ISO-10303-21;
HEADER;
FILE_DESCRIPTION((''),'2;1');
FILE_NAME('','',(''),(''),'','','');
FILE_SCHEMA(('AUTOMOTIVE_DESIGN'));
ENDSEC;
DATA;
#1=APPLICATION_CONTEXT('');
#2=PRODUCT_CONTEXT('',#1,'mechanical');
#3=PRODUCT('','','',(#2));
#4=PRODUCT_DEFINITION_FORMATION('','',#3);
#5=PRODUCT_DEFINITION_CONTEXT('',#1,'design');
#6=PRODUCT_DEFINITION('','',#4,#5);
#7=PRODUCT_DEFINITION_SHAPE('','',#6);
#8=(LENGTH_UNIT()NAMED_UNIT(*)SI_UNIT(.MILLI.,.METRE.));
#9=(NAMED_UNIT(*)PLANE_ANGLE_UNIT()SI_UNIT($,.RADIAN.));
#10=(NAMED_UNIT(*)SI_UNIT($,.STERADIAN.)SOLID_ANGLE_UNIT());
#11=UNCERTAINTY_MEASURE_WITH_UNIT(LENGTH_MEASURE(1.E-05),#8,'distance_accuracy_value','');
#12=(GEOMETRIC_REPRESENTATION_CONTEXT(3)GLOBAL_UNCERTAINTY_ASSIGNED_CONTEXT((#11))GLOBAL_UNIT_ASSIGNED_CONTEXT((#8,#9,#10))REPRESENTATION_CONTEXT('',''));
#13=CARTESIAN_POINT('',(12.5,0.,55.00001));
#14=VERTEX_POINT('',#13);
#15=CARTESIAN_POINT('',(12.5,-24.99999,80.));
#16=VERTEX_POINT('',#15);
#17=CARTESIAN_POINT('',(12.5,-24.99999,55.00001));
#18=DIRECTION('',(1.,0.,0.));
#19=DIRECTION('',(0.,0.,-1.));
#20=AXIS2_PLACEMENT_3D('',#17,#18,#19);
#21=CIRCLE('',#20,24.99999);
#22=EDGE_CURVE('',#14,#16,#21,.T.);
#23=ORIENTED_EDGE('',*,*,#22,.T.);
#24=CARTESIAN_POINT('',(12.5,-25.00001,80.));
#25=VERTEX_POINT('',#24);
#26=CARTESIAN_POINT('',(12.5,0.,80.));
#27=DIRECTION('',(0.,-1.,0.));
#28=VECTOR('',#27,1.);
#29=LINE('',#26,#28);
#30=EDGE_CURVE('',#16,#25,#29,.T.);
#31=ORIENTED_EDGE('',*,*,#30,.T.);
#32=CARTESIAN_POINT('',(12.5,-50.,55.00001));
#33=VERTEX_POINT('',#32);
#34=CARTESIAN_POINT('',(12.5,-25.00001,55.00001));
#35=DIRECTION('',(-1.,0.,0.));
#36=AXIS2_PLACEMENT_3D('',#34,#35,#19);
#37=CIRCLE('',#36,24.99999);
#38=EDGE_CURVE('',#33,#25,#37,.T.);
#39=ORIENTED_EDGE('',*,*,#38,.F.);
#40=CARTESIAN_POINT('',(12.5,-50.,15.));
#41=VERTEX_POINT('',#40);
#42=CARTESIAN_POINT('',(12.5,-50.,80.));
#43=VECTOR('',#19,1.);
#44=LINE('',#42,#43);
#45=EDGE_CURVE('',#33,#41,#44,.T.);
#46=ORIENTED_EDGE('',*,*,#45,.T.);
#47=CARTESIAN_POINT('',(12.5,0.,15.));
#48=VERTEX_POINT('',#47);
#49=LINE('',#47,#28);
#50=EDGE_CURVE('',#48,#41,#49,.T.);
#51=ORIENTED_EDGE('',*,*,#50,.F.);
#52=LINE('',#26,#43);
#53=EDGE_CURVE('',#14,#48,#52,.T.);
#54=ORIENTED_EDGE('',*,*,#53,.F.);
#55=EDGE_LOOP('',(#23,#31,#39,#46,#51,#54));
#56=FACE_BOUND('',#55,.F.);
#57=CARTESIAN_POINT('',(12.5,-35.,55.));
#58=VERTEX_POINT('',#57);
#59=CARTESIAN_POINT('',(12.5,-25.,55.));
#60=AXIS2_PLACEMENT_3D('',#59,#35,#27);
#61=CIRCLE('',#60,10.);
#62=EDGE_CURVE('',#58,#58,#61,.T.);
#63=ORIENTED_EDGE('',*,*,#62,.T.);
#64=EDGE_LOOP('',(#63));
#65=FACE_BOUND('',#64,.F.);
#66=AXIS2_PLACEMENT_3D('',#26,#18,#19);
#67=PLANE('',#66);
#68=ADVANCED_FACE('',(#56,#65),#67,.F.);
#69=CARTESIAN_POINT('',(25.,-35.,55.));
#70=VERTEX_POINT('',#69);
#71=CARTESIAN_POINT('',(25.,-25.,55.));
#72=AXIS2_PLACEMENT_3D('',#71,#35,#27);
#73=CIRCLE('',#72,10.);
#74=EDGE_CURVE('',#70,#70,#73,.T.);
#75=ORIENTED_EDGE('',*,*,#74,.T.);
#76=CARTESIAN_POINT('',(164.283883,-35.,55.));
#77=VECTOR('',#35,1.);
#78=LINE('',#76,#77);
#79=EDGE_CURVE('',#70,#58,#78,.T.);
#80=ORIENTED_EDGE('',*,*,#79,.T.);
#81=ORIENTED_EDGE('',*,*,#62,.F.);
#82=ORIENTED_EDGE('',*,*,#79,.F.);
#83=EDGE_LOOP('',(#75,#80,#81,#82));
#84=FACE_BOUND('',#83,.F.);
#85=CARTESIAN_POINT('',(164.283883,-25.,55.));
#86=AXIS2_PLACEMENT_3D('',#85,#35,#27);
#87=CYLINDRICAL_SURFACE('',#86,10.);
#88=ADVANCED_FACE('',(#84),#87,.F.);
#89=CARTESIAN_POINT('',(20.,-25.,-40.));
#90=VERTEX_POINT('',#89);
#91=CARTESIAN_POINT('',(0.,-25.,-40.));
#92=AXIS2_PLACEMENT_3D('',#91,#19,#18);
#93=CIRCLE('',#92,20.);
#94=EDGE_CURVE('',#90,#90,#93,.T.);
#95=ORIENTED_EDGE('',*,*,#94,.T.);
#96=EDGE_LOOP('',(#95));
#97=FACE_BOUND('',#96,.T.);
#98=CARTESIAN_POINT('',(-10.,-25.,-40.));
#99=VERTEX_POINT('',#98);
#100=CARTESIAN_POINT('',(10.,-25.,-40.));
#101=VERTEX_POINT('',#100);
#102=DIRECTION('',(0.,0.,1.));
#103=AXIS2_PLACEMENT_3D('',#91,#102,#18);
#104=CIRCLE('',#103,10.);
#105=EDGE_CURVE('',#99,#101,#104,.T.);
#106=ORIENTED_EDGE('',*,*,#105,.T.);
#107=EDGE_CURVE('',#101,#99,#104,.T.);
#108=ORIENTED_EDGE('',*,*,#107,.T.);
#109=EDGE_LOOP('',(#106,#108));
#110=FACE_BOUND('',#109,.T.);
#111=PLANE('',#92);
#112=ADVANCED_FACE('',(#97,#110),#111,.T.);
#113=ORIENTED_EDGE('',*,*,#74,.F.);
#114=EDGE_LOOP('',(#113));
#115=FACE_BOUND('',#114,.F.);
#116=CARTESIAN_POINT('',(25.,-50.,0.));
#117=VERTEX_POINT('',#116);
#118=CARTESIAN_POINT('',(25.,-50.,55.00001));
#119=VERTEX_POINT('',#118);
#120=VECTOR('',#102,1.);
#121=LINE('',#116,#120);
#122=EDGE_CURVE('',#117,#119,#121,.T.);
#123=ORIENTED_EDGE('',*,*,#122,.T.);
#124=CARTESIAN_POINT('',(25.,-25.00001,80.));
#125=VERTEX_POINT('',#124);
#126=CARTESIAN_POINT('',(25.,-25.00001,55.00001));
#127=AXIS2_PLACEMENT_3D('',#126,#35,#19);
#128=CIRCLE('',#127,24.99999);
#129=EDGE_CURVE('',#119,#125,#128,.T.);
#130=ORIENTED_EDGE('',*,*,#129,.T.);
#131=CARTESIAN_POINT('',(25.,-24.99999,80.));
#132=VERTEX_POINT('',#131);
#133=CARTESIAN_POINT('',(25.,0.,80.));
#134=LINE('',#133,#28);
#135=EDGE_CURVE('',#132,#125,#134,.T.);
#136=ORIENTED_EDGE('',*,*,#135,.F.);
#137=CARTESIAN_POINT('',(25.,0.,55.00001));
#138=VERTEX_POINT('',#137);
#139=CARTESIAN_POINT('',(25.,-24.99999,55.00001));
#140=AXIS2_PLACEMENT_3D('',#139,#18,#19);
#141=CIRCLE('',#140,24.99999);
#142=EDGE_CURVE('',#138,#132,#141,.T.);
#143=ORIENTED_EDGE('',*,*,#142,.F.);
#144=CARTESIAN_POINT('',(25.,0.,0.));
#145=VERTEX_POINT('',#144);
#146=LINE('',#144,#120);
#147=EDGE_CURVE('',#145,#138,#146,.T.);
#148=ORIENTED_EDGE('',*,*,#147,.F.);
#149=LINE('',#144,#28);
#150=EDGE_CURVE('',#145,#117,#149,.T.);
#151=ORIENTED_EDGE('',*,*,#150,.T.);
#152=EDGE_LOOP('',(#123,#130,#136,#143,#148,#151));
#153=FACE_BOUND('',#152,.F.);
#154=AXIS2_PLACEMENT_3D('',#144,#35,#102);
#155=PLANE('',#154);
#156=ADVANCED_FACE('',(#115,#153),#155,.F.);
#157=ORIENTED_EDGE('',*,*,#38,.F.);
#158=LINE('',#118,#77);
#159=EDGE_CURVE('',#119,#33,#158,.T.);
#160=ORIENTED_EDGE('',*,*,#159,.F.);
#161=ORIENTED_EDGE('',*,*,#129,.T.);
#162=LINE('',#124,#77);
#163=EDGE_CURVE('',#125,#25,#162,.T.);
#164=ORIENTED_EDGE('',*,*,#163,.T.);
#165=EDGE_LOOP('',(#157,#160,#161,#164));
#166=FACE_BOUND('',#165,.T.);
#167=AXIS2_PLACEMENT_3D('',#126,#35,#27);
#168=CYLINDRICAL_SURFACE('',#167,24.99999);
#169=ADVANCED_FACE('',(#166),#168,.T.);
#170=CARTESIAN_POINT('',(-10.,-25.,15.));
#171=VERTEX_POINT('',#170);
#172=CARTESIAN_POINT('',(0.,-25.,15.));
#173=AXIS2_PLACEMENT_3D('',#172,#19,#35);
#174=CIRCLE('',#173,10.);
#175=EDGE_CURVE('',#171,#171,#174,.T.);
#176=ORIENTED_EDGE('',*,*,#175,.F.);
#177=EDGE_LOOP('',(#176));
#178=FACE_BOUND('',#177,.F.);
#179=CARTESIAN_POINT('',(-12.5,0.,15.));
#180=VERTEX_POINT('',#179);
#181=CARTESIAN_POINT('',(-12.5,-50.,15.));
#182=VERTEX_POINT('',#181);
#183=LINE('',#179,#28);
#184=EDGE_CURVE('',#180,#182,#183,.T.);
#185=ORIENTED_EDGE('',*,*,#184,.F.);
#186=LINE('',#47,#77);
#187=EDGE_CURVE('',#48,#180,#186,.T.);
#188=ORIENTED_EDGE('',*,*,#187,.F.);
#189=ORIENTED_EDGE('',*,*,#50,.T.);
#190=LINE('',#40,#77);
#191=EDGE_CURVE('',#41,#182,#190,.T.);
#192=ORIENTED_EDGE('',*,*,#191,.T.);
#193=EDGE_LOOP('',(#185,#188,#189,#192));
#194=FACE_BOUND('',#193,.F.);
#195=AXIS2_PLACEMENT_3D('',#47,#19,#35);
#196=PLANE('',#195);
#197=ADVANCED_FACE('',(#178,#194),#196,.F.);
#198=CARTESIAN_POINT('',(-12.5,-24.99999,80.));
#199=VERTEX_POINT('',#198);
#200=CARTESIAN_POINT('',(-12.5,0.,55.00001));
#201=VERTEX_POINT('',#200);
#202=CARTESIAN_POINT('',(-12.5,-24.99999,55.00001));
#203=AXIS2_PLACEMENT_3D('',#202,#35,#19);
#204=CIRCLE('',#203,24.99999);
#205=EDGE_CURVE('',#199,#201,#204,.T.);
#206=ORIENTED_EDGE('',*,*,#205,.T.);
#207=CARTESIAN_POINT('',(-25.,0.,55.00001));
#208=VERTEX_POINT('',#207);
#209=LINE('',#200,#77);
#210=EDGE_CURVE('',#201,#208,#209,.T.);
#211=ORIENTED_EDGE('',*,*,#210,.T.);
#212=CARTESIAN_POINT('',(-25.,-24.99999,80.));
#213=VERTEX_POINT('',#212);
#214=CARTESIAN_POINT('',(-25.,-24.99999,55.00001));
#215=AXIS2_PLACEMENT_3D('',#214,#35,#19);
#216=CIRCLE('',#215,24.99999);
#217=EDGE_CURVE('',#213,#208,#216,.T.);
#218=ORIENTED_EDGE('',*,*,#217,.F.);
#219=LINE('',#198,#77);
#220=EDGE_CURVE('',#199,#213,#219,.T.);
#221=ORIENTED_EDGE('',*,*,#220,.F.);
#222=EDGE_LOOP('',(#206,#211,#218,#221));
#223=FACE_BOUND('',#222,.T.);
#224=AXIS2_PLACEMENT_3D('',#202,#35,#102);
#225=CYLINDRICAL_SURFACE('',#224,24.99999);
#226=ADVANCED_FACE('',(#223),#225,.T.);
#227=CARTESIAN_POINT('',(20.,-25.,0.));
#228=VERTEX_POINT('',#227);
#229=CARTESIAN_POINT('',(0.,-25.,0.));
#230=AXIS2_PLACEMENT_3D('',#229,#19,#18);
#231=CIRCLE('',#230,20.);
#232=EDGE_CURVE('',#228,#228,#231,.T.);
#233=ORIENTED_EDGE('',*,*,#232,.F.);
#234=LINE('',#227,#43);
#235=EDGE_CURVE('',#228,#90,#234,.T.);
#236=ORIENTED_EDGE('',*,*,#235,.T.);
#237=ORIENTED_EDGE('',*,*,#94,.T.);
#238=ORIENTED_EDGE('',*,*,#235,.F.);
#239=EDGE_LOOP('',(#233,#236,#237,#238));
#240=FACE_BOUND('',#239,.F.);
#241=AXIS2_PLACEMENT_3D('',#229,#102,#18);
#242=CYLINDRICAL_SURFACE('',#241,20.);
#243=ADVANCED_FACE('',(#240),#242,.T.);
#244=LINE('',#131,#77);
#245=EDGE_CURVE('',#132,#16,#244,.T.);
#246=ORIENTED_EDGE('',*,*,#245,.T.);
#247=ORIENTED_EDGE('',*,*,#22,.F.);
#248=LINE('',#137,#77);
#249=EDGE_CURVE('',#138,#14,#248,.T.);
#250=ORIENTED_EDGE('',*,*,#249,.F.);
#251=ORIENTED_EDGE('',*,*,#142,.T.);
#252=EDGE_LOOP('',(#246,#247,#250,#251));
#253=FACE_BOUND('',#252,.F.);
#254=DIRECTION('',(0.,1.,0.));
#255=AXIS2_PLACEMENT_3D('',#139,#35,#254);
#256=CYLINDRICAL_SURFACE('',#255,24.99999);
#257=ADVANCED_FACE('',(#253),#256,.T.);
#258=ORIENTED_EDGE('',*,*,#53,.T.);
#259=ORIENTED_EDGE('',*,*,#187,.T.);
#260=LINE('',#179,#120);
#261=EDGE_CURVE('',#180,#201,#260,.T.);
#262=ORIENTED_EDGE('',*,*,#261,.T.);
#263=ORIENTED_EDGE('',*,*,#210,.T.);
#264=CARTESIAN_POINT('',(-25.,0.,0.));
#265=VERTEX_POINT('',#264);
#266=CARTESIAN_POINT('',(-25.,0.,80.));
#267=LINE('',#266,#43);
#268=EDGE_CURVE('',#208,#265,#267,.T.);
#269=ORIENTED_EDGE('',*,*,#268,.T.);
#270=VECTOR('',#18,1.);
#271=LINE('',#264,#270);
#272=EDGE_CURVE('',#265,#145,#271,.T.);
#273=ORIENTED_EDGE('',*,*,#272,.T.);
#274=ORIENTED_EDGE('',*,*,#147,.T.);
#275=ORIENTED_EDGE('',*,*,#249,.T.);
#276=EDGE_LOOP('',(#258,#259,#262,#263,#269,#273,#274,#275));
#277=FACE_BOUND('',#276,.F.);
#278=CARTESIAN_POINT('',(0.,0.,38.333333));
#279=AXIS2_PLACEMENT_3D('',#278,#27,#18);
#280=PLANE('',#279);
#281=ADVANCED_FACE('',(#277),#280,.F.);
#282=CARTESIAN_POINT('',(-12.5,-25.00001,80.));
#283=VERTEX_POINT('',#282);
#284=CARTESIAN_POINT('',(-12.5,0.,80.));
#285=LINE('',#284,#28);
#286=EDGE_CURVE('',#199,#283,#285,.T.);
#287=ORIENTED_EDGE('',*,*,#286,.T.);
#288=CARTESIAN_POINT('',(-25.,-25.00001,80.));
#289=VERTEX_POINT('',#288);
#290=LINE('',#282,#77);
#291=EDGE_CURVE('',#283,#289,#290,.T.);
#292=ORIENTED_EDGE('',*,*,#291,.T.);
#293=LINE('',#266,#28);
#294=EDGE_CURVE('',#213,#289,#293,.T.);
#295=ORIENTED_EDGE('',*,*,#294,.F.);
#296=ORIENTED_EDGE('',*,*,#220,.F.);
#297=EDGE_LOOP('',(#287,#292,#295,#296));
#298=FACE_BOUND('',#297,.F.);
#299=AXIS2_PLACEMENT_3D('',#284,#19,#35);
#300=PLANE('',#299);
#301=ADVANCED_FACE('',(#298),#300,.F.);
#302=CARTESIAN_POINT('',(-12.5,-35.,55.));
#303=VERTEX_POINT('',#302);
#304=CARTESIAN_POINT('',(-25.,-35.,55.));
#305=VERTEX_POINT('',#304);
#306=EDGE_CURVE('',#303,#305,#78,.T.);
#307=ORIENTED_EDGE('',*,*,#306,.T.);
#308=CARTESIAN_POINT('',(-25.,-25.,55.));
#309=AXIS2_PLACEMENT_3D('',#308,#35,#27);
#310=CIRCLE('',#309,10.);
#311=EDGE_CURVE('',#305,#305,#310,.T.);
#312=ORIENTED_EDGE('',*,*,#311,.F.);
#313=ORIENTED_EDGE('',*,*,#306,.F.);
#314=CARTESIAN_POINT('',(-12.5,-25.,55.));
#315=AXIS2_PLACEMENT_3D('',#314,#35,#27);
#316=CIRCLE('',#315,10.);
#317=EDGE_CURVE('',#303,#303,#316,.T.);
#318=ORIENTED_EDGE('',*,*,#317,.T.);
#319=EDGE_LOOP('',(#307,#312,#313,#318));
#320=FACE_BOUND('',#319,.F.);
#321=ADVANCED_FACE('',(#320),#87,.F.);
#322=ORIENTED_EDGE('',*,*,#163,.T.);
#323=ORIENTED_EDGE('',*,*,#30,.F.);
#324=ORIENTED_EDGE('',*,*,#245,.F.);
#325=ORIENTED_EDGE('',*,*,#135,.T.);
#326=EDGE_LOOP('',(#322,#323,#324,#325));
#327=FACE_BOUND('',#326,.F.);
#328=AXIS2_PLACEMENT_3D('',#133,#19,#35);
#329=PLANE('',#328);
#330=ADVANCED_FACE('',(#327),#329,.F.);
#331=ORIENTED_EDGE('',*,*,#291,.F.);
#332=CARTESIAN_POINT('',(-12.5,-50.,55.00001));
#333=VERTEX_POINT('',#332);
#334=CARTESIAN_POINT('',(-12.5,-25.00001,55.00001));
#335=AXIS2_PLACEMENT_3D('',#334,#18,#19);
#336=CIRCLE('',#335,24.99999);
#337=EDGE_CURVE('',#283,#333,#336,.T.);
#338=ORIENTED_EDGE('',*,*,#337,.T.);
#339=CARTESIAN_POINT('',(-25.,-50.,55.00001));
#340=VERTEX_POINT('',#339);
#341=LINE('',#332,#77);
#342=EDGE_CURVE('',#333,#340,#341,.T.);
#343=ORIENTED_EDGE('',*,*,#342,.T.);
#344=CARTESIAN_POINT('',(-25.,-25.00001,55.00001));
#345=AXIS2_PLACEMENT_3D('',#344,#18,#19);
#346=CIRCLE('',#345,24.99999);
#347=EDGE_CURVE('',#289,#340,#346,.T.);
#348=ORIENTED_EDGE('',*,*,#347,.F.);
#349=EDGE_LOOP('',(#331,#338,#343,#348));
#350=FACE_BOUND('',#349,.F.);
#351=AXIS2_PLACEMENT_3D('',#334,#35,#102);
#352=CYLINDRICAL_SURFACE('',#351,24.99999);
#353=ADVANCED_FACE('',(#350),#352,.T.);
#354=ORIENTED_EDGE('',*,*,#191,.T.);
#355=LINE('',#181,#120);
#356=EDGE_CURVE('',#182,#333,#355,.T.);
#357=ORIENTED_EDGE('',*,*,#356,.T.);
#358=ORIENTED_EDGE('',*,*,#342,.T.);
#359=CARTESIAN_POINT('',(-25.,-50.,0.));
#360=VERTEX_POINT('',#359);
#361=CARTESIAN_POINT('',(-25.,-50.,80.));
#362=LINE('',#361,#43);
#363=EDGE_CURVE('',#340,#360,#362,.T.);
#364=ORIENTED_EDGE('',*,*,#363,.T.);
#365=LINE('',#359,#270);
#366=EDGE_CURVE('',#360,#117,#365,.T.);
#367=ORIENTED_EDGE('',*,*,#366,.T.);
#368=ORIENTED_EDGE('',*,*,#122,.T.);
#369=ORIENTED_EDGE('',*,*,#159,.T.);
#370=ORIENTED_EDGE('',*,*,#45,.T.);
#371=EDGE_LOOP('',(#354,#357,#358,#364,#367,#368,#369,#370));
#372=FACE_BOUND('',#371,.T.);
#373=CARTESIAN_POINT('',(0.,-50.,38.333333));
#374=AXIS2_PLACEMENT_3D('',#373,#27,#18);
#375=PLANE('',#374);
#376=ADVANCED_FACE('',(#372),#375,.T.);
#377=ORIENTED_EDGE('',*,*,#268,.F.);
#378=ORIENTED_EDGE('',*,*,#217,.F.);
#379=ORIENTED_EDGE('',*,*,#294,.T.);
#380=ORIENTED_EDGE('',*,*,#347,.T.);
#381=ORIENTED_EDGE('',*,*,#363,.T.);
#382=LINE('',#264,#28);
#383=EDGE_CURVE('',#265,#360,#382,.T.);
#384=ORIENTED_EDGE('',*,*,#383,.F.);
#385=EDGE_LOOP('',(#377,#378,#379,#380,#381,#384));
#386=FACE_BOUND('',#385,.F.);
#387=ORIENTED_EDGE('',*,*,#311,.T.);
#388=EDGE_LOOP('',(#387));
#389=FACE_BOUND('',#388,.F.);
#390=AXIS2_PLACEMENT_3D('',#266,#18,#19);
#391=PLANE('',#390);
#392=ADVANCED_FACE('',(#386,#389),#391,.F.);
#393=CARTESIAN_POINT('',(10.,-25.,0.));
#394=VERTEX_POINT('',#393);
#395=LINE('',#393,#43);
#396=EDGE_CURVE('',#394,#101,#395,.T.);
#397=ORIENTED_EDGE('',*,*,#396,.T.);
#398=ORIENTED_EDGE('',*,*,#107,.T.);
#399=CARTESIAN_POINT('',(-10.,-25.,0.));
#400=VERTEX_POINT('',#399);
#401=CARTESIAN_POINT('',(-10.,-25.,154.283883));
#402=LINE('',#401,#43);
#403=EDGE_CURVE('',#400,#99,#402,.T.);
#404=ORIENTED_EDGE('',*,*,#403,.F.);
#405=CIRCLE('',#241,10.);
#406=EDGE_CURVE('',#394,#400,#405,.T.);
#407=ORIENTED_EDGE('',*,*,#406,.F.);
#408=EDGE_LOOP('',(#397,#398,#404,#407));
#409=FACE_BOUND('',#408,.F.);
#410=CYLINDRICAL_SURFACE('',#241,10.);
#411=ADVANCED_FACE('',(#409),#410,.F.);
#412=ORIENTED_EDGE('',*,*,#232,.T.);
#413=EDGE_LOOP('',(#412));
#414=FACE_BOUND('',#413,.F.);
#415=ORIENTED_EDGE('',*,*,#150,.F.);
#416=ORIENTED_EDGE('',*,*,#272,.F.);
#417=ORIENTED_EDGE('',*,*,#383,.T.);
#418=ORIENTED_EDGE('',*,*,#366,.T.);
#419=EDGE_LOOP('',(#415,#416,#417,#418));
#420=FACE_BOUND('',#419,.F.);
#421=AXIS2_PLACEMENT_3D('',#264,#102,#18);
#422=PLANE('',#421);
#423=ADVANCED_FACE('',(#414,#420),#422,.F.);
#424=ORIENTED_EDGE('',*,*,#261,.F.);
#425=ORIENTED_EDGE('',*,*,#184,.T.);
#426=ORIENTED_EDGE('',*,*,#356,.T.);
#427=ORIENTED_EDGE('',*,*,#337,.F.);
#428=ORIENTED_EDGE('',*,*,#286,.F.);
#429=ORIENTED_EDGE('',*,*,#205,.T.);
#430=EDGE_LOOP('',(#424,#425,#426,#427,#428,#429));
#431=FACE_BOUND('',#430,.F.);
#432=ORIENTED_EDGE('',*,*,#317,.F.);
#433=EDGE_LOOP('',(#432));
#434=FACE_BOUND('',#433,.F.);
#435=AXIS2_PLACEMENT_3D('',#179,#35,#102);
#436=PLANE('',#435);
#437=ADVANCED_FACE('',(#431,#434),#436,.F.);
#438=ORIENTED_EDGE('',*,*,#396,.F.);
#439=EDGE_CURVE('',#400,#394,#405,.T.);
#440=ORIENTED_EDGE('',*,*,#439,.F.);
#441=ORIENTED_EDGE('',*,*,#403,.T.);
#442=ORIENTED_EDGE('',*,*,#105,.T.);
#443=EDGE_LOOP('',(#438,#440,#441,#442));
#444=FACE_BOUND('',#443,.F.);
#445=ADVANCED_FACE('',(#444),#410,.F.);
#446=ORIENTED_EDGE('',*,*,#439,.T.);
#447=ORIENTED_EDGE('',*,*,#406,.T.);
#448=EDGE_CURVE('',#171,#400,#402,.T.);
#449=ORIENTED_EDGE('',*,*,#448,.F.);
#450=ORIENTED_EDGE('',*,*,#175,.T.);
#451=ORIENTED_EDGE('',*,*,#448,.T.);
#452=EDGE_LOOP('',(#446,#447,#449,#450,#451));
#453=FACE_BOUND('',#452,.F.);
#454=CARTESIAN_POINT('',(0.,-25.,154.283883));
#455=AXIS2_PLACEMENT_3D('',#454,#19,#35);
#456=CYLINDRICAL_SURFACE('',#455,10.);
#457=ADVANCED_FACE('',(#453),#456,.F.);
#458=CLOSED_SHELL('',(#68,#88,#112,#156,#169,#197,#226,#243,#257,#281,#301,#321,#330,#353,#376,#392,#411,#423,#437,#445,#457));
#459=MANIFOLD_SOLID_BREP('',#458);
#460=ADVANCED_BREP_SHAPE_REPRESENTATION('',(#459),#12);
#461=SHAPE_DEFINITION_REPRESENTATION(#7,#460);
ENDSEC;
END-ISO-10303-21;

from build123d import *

# Parameters (mm, degrees)
F1_DEPTH = 50
F2_R     = 20
F3_DEPTH = 40
F5_D     = 20
F6_R     = 24.99999
F8_D     = 20
F8_DEPTH = 40.001
F10_D    = 20


# Not quite as in the source:
# - a fillet or chamfer is up to 0.001 mm smaller than in the source, because OpenCascade refuses the exact size


with BuildPart() as f1:
    # F0 (on Front) → F1 (new body)
    with BuildSketch(Plane.XZ):
        Polygon((-25, 80), (-25, 0), (25, 0), (25, 80), (12.5, 80), (12.5, 15), (0, 15), (-12.5, 15), (-12.5, 80), align=None)
    extrude(amount=F1_DEPTH)

    # F2 (on face) → F3 (join)
    with BuildSketch(Plane(origin=(0, 0, 0), x_dir=(1, 0, 0), z_dir=(0, 0, -1))):
        with Locations((0, 25)):
            Circle(F2_R)
    extrude(amount=F3_DEPTH)

    # F5 (through all)
    with Locations(Plane.YZ.offset(25)):
        with Locations((-25, 55)):
            Hole(F5_D / 2)

    # F6 (radius 25 in the source; OpenCascade refuses exactly that, so slightly less here)
    f6_edges = [f1.edges().sort_by_distance(p)[0] for p in [
        (18.75, -50, 80),
        (18.75, 0, 80),
        (-18.75, -50, 80),
        (-18.75, 0, 80),
    ]]
    fillet(f6_edges, radius=F6_R)

    # F8 (through all, one way)
    with BuildSketch(Plane.XY):
        with Locations((0, -25)):
            Circle(F8_D / 2)
    extrude(amount=-F8_DEPTH, mode=Mode.SUBTRACT)

    # F10 (through all)
    with Locations(Plane.XY.offset(15)):
        with Locations((0, -25)):
            Hole(F10_D / 2)


solid = f1.part
